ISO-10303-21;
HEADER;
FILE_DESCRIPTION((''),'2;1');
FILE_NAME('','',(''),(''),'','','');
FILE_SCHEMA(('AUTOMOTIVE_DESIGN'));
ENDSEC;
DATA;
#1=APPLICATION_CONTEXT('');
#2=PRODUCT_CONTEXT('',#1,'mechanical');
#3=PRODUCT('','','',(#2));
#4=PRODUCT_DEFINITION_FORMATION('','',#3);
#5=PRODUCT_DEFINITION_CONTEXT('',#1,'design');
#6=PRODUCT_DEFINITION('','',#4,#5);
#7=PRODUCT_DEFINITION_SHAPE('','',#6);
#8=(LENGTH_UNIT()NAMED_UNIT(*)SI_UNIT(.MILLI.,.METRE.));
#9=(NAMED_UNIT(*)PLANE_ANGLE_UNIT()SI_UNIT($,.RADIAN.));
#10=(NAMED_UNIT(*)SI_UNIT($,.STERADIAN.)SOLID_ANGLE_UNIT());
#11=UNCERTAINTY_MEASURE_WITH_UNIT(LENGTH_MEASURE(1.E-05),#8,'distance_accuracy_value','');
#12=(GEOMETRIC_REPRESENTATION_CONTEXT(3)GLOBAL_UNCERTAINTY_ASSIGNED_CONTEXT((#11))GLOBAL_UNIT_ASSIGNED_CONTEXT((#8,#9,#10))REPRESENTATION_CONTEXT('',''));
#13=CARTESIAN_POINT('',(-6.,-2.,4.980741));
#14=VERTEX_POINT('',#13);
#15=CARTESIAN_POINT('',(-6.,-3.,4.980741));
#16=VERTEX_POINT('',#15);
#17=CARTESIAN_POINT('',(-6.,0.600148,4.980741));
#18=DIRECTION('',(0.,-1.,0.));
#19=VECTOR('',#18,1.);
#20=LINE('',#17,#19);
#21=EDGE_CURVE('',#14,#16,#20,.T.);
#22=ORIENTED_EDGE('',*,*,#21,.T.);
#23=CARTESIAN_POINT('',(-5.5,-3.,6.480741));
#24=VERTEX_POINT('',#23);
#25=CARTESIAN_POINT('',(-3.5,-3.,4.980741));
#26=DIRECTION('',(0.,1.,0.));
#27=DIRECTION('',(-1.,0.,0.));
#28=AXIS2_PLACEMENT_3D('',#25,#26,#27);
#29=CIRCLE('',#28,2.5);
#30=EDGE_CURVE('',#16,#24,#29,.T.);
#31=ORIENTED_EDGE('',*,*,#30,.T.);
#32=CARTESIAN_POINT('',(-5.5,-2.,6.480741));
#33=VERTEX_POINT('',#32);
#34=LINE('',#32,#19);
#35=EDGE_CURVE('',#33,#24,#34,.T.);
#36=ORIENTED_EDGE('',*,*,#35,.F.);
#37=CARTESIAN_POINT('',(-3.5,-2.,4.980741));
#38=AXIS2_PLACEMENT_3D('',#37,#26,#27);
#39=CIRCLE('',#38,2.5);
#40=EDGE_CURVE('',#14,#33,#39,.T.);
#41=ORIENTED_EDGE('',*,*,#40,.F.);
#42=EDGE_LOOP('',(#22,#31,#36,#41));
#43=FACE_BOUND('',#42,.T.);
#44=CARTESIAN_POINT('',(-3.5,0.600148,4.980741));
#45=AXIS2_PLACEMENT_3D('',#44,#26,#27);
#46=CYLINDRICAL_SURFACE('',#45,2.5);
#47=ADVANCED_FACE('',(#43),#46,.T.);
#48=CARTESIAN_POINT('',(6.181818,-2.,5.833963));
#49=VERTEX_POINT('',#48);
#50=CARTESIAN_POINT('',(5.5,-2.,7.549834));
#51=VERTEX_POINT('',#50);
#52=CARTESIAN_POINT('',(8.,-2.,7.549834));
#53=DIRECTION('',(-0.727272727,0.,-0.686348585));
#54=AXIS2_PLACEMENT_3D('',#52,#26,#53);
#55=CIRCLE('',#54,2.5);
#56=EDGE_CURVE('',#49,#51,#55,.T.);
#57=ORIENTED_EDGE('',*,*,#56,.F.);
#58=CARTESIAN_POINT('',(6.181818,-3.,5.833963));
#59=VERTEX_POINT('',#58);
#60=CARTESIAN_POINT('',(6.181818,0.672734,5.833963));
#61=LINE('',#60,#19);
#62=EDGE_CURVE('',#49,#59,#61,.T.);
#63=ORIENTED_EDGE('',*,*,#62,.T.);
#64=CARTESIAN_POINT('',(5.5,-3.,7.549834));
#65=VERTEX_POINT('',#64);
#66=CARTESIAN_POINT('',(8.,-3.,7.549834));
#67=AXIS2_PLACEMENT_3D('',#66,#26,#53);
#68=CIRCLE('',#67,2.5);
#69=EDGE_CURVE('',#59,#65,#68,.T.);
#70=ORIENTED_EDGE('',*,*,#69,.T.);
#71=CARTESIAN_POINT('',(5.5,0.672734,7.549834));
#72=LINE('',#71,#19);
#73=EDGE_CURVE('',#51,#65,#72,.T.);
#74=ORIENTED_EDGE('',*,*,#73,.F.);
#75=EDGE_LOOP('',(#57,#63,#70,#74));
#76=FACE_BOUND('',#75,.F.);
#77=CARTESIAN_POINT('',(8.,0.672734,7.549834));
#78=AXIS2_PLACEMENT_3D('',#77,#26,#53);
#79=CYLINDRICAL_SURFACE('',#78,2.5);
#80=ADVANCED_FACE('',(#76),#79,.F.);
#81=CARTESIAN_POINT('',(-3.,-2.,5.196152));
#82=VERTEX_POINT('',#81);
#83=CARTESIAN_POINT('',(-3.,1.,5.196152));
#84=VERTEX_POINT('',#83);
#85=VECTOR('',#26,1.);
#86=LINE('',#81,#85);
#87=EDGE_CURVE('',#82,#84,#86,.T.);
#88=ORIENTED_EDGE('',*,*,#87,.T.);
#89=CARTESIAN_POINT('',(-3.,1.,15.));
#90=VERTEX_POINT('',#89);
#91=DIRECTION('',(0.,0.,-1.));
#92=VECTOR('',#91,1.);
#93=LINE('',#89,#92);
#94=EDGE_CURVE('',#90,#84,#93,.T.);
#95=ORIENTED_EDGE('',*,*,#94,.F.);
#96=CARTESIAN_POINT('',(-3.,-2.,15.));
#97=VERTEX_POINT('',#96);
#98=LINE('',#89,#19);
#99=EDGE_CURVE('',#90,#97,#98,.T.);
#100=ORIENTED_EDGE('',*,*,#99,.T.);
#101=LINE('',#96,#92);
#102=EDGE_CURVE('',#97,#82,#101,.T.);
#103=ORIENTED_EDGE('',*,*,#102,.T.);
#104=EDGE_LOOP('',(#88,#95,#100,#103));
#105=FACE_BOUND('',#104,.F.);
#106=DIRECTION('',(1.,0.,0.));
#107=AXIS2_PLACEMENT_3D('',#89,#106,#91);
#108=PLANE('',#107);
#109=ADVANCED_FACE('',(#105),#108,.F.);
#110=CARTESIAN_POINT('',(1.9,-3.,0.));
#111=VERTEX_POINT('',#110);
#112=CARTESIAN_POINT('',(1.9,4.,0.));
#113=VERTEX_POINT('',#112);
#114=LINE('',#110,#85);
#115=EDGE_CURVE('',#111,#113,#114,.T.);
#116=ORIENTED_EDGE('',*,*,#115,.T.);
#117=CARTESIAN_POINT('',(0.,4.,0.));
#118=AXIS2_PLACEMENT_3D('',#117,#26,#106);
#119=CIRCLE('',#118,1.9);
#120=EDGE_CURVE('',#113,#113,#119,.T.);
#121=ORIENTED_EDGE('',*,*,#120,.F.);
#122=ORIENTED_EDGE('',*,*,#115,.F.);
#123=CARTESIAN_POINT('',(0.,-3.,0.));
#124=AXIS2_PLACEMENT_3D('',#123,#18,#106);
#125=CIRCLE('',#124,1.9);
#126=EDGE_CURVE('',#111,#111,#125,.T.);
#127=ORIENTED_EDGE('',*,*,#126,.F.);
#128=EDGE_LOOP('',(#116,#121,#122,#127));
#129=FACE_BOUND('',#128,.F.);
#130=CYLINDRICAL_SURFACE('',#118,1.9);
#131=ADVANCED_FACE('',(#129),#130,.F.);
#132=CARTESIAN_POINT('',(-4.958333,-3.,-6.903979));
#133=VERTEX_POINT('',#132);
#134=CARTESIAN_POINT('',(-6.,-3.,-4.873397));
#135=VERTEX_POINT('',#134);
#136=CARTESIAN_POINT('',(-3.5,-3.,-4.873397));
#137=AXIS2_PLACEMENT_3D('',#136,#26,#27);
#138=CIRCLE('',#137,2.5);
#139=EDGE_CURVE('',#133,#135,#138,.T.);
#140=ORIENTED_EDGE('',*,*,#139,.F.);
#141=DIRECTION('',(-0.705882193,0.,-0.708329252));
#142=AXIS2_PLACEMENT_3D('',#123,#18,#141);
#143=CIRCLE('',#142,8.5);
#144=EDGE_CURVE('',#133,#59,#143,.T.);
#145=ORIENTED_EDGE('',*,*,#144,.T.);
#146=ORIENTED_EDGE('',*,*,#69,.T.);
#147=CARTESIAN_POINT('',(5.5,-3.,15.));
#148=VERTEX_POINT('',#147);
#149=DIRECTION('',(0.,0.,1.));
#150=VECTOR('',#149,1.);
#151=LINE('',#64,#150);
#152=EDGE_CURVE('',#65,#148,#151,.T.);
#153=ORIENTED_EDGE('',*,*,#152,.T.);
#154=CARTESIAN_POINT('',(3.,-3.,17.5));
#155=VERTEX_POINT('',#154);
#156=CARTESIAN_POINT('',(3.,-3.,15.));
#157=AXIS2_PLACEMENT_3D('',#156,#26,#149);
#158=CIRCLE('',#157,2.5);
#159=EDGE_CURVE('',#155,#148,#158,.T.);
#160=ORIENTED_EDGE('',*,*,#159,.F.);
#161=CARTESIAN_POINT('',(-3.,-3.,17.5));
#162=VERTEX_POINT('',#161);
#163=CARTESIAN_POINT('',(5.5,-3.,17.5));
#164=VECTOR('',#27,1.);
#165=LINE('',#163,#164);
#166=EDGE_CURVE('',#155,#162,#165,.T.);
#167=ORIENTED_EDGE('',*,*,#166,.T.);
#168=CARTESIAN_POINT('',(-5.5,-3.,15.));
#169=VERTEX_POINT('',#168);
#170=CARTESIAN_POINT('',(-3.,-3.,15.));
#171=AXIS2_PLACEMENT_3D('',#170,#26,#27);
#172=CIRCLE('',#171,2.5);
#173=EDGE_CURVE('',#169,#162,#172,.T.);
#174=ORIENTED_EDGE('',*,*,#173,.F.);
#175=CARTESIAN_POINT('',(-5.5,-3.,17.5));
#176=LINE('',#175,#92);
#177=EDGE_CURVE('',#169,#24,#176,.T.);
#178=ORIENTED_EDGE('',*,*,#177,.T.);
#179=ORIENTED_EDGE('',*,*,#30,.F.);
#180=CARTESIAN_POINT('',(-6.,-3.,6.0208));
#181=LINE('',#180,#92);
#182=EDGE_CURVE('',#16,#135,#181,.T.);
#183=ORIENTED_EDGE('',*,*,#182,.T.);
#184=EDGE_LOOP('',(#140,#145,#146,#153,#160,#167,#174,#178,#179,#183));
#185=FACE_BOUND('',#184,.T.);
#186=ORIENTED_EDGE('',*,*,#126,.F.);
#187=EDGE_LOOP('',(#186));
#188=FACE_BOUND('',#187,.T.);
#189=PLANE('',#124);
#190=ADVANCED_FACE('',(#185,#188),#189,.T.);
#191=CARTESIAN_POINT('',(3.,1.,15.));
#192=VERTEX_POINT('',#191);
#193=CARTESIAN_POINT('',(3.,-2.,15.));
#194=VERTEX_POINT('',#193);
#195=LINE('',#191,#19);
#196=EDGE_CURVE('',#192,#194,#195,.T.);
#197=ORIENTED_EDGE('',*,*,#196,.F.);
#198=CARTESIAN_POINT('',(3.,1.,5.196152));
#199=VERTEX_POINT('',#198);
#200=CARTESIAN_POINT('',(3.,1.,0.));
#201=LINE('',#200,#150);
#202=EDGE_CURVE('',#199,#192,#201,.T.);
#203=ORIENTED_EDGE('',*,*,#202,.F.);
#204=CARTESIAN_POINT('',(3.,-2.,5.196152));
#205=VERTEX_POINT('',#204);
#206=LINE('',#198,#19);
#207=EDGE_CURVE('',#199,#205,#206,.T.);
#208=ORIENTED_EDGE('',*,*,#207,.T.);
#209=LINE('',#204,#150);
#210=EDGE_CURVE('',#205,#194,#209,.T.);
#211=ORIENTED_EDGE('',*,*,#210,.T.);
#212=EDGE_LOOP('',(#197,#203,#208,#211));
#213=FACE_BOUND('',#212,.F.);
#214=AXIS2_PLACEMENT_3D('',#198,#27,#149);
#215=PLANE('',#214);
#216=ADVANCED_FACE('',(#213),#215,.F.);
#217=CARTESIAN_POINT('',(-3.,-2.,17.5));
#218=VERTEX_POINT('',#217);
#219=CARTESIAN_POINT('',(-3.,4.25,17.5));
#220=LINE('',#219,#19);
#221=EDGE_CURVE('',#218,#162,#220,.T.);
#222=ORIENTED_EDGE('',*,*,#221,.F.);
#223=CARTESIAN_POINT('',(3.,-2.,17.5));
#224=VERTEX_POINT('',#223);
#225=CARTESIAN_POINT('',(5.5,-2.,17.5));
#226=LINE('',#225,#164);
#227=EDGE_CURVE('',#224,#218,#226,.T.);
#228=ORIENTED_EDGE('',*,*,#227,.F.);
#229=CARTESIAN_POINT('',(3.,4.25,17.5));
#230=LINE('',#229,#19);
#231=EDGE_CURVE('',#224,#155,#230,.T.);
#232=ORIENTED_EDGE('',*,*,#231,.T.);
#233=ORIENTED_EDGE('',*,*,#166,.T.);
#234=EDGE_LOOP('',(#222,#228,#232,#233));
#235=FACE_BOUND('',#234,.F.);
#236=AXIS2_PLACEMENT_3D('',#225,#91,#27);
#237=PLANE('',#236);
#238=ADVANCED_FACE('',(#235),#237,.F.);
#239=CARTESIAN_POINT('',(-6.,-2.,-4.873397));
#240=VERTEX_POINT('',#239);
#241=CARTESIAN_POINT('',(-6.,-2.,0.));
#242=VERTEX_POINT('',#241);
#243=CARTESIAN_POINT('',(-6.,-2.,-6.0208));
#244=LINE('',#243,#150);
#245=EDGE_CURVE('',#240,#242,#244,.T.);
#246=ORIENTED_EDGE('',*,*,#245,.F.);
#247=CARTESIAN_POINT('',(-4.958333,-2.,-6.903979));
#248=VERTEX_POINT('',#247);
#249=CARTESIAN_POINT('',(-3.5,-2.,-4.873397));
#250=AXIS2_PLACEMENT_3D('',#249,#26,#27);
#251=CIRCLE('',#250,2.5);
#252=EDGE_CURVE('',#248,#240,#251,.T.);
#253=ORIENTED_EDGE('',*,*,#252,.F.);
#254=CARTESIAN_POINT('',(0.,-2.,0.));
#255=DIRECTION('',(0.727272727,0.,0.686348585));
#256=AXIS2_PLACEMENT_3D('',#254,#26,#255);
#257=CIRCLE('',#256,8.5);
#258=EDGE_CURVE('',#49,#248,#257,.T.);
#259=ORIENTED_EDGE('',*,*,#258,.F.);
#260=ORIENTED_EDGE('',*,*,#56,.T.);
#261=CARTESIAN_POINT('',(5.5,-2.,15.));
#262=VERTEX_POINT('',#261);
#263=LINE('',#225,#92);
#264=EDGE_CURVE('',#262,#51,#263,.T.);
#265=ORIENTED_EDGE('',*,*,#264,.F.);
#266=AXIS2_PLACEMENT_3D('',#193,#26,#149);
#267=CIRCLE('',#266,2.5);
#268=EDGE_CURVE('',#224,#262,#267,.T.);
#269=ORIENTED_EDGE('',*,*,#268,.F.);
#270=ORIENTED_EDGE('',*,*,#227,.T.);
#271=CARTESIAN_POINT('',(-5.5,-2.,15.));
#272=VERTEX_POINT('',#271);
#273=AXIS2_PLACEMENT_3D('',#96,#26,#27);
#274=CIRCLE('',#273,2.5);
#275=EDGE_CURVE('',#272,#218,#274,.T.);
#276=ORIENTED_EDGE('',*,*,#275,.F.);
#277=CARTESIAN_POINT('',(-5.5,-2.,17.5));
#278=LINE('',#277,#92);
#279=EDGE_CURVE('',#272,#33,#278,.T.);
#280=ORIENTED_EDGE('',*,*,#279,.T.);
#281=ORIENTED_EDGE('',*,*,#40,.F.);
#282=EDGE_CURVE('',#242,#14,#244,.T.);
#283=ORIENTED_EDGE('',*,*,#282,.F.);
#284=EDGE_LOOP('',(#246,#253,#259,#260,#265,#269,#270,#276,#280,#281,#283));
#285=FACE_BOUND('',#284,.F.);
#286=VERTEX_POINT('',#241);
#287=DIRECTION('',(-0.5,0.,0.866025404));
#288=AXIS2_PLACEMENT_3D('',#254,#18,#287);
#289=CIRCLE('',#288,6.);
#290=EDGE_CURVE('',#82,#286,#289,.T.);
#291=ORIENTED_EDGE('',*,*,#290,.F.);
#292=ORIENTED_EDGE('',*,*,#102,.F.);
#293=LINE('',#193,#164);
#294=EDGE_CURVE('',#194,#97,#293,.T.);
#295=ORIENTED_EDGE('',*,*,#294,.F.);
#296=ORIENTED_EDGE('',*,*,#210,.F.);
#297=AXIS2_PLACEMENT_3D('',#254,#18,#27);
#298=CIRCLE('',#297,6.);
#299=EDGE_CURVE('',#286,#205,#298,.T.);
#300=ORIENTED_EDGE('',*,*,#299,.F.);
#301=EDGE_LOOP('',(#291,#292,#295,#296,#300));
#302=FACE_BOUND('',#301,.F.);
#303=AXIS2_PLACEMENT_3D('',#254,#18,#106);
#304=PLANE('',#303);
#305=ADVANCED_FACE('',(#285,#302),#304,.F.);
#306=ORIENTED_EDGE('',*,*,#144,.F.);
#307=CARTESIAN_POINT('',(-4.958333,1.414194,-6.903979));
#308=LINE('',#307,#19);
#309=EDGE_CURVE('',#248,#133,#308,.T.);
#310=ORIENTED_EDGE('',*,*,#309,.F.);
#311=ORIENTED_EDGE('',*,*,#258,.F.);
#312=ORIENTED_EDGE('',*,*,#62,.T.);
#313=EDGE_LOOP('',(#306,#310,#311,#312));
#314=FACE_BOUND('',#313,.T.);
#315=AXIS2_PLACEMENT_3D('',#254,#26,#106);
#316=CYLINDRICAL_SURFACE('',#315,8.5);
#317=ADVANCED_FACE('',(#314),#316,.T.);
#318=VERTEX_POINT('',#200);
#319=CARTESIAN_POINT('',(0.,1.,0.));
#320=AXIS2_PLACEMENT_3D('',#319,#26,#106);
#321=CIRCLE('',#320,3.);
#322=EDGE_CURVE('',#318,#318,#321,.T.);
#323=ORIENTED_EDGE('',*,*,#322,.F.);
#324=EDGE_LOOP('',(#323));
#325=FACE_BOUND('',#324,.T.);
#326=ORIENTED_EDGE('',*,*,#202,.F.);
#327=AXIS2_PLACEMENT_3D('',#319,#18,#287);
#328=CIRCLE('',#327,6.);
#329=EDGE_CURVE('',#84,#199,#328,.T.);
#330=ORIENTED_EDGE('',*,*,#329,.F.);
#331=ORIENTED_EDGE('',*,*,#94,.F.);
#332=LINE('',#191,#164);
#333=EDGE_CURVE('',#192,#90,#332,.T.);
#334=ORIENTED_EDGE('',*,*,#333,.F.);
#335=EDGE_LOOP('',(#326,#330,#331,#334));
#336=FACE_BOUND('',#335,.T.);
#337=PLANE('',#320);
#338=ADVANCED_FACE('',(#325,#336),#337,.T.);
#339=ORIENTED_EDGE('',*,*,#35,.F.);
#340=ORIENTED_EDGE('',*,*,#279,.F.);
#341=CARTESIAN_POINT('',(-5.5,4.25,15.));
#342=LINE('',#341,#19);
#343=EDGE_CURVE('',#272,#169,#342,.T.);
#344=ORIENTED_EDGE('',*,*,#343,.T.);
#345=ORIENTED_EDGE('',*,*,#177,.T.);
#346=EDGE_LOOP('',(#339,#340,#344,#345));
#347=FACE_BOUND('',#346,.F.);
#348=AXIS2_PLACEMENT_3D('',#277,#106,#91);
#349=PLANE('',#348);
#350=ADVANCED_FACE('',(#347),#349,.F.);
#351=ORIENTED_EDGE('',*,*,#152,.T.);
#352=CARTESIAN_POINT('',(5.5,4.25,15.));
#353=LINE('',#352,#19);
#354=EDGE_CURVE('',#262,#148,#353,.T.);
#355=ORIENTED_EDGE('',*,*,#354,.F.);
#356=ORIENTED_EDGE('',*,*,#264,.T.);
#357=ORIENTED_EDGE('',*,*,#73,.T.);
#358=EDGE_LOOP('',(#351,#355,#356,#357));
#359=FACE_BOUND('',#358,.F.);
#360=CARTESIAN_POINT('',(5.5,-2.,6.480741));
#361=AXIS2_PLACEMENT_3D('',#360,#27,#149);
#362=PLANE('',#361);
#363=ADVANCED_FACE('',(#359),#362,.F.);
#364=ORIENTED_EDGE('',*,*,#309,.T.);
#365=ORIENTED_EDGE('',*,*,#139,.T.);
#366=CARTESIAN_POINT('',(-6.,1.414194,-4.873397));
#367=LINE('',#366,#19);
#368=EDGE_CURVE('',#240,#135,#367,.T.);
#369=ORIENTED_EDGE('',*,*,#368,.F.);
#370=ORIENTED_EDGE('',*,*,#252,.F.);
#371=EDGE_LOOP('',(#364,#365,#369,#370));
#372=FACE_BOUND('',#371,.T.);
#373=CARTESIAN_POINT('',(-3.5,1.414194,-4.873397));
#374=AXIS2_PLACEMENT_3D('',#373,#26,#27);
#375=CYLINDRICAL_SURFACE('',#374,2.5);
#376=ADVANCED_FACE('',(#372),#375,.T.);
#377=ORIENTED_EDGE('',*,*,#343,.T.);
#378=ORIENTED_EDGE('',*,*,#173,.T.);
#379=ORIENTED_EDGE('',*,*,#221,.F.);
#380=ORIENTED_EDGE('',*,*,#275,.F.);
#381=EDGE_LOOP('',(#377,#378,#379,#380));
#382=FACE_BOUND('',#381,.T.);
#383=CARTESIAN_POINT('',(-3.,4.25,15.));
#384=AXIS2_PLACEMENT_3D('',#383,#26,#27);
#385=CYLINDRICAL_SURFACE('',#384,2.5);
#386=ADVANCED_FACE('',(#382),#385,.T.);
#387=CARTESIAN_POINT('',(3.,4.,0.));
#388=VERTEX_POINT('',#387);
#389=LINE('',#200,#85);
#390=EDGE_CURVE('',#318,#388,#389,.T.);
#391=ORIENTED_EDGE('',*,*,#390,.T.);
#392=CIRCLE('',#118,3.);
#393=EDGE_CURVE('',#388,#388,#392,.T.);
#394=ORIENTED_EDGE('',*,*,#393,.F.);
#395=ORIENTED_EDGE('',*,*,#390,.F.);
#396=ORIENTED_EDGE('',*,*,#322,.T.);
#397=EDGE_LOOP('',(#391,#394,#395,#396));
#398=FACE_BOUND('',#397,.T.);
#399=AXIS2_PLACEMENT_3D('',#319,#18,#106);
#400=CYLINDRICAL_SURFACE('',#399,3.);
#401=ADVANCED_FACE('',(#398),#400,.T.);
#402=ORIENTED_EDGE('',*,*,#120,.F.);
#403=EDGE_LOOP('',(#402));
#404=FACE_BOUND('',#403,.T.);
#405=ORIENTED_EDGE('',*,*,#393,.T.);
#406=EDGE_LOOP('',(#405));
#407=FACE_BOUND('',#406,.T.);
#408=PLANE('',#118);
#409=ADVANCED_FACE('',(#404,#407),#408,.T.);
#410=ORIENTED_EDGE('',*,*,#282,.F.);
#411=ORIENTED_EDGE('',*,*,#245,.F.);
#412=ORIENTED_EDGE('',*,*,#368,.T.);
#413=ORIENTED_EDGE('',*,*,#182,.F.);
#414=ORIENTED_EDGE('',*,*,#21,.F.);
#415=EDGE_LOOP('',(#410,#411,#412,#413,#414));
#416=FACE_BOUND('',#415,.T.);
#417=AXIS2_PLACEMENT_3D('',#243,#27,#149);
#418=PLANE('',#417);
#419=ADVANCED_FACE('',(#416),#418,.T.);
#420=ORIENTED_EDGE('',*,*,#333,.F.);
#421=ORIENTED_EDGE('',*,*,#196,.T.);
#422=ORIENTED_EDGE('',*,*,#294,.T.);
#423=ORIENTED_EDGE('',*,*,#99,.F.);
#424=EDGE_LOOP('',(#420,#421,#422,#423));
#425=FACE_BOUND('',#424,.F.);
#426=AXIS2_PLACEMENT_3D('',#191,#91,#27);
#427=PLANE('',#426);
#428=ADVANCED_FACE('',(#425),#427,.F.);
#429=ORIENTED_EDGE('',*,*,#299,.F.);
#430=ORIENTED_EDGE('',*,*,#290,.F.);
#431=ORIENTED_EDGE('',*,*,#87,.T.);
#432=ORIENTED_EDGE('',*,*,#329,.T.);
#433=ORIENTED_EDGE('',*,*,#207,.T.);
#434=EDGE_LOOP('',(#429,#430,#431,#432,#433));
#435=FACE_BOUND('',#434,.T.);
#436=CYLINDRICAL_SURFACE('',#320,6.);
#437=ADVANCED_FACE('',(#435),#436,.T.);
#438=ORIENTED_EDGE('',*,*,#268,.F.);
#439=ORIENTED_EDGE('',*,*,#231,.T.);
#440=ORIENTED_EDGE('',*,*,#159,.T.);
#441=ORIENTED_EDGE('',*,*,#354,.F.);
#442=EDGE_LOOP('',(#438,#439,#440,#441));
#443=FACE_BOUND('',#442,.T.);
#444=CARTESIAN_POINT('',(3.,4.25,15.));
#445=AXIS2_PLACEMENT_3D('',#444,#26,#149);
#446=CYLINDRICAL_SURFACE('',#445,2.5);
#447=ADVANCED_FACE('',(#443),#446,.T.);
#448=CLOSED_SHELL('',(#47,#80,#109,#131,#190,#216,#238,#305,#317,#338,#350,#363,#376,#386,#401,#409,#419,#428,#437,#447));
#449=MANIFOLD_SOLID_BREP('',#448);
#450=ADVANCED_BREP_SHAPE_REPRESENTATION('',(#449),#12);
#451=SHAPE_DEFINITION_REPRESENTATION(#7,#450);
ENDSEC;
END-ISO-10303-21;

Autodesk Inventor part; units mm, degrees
ref_plane "YZ Plane" through (0, 0, 0) normal (1, 0, 0) x (0, 1, 0)
ref_plane "XZ Plane" through (0, 0, 0) normal (0, 1, 0) x (-1, 0, 0)
ref_plane "XY Plane" through (0, 0, 0) normal (0, 0, 1) x (1, 0, 0)
sketch "スケッチ1" plane through (0, 0, 0) normal (0, 1, 0) x (-1, 0, 0)
  circle A0 centre (0, 0) radius 6
  dimension "d0" = 12
extrude "押し出し1" add sketch "スケッチ1" along normal blind 1
sketch "スケッチ2" plane through (0, 1, 0) normal (0, 1, 0) x (1, 0, 0)
  circle A0 centre (0, 0) radius 3
  dimension "d3" = 6
extrude "押し出し2" add sketch "スケッチ2" along normal blind 3
sketch "スケッチ3" plane through (0, 4, 0) normal (0, 1, 0) x (1, 0, 0)
  circle A0 centre (0, 0) radius 1.9
  dimension "d6" = 3.8
extrude "押し出し3" cut sketch "スケッチ3" against normal through all
sketch "スケッチ5" plane through (0, 1, 0) normal (0, 1, 0) x (1, 0, 0)
  circle A0 centre (0, 0) radius 3 projected
  circle A1 centre (0, 0) radius 6 projected
  line L0 (-3, 0) -> (3, 0)
  line L1 (3, 0) -> (3, -15)
  line L2 (3, -15) -> (-3, -15)
  line L3 (-3, -15) -> (-3, 0)
  circle A2 centre (0, 0) radius 3 projected
  circle A3 centre (0, 0) radius 1.9 projected
  point P0 (3, -5.1962)
  point P1 (-3, -5.1962)
  dimension "d9" = 15
extrude "押し出し4" add sketch "スケッチ5" against normal blind 3 contours L0 A3 A0 | L1 A1 L3 A0 | A0 L0 A3 | A0 L3 A1 L1 | L1 L2 L3 A1
sketch "スケッチ6" plane through (0, -2, 0) normal (0, -1, 0) x (1, 0, 0)
  line L0 (5.5, 17.5) -> (-5.5, 17.5)
  line L1 (-5.5, 17.5) -> (-5.5, 0)
  line L2 (-5.5, 0) -> (5.5, 0)
  line L3 (5.5, 0) -> (5.5, 17.5)
  line L4 (3, 5.1962) -> (3, 15) projected
  line L5 (-3, 15) -> (-3, 5.1962) projected
  line L6 (3, 15) -> (-3, 15) projected
  arc A0 (-3, 5.1962) -> (3, 5.1962) centre (0, 0) ccw projected
  circle A1 centre (0, 0) radius 8.5
  circle A2 centre (0, 0) radius 1.9 projected
  line L7 (-6, -6.0208) -> (-6, 6.0208)
  point P0 (-5.5, 6.4807)
  point P1 (5.5, 6.4807)
  dimension "d12" = 2.5
  dimension "d13" = 2.5
  dimension "d14" = 2.5
  dimension "d15" = 2.5
extrude "押し出し5" add sketch "スケッチ6" along normal blind 1 contours L3 A1 L4 L6 L5 L1 L0 | A1 L7 A0 L3 | L3 A0 L4 A1 | A1 L5 A0 L1 | L1 A0 L7 A1 | A0 L1 L2 A2 L3 | L3 L2 A2 L1 A0 L5 A1 L4 | A1 L5 L6 L4
fillet "フィレット1" radius 2.5 5 edges at (5.5, -2.5, 17.5) (-5.5, -2.5, 17.5) (-6, -2.5, 6.0208) (-6, -2.5, -6.0208) (5.5, -2.5, 6.4807)
properties part number "ベルト_bush_皿側"
